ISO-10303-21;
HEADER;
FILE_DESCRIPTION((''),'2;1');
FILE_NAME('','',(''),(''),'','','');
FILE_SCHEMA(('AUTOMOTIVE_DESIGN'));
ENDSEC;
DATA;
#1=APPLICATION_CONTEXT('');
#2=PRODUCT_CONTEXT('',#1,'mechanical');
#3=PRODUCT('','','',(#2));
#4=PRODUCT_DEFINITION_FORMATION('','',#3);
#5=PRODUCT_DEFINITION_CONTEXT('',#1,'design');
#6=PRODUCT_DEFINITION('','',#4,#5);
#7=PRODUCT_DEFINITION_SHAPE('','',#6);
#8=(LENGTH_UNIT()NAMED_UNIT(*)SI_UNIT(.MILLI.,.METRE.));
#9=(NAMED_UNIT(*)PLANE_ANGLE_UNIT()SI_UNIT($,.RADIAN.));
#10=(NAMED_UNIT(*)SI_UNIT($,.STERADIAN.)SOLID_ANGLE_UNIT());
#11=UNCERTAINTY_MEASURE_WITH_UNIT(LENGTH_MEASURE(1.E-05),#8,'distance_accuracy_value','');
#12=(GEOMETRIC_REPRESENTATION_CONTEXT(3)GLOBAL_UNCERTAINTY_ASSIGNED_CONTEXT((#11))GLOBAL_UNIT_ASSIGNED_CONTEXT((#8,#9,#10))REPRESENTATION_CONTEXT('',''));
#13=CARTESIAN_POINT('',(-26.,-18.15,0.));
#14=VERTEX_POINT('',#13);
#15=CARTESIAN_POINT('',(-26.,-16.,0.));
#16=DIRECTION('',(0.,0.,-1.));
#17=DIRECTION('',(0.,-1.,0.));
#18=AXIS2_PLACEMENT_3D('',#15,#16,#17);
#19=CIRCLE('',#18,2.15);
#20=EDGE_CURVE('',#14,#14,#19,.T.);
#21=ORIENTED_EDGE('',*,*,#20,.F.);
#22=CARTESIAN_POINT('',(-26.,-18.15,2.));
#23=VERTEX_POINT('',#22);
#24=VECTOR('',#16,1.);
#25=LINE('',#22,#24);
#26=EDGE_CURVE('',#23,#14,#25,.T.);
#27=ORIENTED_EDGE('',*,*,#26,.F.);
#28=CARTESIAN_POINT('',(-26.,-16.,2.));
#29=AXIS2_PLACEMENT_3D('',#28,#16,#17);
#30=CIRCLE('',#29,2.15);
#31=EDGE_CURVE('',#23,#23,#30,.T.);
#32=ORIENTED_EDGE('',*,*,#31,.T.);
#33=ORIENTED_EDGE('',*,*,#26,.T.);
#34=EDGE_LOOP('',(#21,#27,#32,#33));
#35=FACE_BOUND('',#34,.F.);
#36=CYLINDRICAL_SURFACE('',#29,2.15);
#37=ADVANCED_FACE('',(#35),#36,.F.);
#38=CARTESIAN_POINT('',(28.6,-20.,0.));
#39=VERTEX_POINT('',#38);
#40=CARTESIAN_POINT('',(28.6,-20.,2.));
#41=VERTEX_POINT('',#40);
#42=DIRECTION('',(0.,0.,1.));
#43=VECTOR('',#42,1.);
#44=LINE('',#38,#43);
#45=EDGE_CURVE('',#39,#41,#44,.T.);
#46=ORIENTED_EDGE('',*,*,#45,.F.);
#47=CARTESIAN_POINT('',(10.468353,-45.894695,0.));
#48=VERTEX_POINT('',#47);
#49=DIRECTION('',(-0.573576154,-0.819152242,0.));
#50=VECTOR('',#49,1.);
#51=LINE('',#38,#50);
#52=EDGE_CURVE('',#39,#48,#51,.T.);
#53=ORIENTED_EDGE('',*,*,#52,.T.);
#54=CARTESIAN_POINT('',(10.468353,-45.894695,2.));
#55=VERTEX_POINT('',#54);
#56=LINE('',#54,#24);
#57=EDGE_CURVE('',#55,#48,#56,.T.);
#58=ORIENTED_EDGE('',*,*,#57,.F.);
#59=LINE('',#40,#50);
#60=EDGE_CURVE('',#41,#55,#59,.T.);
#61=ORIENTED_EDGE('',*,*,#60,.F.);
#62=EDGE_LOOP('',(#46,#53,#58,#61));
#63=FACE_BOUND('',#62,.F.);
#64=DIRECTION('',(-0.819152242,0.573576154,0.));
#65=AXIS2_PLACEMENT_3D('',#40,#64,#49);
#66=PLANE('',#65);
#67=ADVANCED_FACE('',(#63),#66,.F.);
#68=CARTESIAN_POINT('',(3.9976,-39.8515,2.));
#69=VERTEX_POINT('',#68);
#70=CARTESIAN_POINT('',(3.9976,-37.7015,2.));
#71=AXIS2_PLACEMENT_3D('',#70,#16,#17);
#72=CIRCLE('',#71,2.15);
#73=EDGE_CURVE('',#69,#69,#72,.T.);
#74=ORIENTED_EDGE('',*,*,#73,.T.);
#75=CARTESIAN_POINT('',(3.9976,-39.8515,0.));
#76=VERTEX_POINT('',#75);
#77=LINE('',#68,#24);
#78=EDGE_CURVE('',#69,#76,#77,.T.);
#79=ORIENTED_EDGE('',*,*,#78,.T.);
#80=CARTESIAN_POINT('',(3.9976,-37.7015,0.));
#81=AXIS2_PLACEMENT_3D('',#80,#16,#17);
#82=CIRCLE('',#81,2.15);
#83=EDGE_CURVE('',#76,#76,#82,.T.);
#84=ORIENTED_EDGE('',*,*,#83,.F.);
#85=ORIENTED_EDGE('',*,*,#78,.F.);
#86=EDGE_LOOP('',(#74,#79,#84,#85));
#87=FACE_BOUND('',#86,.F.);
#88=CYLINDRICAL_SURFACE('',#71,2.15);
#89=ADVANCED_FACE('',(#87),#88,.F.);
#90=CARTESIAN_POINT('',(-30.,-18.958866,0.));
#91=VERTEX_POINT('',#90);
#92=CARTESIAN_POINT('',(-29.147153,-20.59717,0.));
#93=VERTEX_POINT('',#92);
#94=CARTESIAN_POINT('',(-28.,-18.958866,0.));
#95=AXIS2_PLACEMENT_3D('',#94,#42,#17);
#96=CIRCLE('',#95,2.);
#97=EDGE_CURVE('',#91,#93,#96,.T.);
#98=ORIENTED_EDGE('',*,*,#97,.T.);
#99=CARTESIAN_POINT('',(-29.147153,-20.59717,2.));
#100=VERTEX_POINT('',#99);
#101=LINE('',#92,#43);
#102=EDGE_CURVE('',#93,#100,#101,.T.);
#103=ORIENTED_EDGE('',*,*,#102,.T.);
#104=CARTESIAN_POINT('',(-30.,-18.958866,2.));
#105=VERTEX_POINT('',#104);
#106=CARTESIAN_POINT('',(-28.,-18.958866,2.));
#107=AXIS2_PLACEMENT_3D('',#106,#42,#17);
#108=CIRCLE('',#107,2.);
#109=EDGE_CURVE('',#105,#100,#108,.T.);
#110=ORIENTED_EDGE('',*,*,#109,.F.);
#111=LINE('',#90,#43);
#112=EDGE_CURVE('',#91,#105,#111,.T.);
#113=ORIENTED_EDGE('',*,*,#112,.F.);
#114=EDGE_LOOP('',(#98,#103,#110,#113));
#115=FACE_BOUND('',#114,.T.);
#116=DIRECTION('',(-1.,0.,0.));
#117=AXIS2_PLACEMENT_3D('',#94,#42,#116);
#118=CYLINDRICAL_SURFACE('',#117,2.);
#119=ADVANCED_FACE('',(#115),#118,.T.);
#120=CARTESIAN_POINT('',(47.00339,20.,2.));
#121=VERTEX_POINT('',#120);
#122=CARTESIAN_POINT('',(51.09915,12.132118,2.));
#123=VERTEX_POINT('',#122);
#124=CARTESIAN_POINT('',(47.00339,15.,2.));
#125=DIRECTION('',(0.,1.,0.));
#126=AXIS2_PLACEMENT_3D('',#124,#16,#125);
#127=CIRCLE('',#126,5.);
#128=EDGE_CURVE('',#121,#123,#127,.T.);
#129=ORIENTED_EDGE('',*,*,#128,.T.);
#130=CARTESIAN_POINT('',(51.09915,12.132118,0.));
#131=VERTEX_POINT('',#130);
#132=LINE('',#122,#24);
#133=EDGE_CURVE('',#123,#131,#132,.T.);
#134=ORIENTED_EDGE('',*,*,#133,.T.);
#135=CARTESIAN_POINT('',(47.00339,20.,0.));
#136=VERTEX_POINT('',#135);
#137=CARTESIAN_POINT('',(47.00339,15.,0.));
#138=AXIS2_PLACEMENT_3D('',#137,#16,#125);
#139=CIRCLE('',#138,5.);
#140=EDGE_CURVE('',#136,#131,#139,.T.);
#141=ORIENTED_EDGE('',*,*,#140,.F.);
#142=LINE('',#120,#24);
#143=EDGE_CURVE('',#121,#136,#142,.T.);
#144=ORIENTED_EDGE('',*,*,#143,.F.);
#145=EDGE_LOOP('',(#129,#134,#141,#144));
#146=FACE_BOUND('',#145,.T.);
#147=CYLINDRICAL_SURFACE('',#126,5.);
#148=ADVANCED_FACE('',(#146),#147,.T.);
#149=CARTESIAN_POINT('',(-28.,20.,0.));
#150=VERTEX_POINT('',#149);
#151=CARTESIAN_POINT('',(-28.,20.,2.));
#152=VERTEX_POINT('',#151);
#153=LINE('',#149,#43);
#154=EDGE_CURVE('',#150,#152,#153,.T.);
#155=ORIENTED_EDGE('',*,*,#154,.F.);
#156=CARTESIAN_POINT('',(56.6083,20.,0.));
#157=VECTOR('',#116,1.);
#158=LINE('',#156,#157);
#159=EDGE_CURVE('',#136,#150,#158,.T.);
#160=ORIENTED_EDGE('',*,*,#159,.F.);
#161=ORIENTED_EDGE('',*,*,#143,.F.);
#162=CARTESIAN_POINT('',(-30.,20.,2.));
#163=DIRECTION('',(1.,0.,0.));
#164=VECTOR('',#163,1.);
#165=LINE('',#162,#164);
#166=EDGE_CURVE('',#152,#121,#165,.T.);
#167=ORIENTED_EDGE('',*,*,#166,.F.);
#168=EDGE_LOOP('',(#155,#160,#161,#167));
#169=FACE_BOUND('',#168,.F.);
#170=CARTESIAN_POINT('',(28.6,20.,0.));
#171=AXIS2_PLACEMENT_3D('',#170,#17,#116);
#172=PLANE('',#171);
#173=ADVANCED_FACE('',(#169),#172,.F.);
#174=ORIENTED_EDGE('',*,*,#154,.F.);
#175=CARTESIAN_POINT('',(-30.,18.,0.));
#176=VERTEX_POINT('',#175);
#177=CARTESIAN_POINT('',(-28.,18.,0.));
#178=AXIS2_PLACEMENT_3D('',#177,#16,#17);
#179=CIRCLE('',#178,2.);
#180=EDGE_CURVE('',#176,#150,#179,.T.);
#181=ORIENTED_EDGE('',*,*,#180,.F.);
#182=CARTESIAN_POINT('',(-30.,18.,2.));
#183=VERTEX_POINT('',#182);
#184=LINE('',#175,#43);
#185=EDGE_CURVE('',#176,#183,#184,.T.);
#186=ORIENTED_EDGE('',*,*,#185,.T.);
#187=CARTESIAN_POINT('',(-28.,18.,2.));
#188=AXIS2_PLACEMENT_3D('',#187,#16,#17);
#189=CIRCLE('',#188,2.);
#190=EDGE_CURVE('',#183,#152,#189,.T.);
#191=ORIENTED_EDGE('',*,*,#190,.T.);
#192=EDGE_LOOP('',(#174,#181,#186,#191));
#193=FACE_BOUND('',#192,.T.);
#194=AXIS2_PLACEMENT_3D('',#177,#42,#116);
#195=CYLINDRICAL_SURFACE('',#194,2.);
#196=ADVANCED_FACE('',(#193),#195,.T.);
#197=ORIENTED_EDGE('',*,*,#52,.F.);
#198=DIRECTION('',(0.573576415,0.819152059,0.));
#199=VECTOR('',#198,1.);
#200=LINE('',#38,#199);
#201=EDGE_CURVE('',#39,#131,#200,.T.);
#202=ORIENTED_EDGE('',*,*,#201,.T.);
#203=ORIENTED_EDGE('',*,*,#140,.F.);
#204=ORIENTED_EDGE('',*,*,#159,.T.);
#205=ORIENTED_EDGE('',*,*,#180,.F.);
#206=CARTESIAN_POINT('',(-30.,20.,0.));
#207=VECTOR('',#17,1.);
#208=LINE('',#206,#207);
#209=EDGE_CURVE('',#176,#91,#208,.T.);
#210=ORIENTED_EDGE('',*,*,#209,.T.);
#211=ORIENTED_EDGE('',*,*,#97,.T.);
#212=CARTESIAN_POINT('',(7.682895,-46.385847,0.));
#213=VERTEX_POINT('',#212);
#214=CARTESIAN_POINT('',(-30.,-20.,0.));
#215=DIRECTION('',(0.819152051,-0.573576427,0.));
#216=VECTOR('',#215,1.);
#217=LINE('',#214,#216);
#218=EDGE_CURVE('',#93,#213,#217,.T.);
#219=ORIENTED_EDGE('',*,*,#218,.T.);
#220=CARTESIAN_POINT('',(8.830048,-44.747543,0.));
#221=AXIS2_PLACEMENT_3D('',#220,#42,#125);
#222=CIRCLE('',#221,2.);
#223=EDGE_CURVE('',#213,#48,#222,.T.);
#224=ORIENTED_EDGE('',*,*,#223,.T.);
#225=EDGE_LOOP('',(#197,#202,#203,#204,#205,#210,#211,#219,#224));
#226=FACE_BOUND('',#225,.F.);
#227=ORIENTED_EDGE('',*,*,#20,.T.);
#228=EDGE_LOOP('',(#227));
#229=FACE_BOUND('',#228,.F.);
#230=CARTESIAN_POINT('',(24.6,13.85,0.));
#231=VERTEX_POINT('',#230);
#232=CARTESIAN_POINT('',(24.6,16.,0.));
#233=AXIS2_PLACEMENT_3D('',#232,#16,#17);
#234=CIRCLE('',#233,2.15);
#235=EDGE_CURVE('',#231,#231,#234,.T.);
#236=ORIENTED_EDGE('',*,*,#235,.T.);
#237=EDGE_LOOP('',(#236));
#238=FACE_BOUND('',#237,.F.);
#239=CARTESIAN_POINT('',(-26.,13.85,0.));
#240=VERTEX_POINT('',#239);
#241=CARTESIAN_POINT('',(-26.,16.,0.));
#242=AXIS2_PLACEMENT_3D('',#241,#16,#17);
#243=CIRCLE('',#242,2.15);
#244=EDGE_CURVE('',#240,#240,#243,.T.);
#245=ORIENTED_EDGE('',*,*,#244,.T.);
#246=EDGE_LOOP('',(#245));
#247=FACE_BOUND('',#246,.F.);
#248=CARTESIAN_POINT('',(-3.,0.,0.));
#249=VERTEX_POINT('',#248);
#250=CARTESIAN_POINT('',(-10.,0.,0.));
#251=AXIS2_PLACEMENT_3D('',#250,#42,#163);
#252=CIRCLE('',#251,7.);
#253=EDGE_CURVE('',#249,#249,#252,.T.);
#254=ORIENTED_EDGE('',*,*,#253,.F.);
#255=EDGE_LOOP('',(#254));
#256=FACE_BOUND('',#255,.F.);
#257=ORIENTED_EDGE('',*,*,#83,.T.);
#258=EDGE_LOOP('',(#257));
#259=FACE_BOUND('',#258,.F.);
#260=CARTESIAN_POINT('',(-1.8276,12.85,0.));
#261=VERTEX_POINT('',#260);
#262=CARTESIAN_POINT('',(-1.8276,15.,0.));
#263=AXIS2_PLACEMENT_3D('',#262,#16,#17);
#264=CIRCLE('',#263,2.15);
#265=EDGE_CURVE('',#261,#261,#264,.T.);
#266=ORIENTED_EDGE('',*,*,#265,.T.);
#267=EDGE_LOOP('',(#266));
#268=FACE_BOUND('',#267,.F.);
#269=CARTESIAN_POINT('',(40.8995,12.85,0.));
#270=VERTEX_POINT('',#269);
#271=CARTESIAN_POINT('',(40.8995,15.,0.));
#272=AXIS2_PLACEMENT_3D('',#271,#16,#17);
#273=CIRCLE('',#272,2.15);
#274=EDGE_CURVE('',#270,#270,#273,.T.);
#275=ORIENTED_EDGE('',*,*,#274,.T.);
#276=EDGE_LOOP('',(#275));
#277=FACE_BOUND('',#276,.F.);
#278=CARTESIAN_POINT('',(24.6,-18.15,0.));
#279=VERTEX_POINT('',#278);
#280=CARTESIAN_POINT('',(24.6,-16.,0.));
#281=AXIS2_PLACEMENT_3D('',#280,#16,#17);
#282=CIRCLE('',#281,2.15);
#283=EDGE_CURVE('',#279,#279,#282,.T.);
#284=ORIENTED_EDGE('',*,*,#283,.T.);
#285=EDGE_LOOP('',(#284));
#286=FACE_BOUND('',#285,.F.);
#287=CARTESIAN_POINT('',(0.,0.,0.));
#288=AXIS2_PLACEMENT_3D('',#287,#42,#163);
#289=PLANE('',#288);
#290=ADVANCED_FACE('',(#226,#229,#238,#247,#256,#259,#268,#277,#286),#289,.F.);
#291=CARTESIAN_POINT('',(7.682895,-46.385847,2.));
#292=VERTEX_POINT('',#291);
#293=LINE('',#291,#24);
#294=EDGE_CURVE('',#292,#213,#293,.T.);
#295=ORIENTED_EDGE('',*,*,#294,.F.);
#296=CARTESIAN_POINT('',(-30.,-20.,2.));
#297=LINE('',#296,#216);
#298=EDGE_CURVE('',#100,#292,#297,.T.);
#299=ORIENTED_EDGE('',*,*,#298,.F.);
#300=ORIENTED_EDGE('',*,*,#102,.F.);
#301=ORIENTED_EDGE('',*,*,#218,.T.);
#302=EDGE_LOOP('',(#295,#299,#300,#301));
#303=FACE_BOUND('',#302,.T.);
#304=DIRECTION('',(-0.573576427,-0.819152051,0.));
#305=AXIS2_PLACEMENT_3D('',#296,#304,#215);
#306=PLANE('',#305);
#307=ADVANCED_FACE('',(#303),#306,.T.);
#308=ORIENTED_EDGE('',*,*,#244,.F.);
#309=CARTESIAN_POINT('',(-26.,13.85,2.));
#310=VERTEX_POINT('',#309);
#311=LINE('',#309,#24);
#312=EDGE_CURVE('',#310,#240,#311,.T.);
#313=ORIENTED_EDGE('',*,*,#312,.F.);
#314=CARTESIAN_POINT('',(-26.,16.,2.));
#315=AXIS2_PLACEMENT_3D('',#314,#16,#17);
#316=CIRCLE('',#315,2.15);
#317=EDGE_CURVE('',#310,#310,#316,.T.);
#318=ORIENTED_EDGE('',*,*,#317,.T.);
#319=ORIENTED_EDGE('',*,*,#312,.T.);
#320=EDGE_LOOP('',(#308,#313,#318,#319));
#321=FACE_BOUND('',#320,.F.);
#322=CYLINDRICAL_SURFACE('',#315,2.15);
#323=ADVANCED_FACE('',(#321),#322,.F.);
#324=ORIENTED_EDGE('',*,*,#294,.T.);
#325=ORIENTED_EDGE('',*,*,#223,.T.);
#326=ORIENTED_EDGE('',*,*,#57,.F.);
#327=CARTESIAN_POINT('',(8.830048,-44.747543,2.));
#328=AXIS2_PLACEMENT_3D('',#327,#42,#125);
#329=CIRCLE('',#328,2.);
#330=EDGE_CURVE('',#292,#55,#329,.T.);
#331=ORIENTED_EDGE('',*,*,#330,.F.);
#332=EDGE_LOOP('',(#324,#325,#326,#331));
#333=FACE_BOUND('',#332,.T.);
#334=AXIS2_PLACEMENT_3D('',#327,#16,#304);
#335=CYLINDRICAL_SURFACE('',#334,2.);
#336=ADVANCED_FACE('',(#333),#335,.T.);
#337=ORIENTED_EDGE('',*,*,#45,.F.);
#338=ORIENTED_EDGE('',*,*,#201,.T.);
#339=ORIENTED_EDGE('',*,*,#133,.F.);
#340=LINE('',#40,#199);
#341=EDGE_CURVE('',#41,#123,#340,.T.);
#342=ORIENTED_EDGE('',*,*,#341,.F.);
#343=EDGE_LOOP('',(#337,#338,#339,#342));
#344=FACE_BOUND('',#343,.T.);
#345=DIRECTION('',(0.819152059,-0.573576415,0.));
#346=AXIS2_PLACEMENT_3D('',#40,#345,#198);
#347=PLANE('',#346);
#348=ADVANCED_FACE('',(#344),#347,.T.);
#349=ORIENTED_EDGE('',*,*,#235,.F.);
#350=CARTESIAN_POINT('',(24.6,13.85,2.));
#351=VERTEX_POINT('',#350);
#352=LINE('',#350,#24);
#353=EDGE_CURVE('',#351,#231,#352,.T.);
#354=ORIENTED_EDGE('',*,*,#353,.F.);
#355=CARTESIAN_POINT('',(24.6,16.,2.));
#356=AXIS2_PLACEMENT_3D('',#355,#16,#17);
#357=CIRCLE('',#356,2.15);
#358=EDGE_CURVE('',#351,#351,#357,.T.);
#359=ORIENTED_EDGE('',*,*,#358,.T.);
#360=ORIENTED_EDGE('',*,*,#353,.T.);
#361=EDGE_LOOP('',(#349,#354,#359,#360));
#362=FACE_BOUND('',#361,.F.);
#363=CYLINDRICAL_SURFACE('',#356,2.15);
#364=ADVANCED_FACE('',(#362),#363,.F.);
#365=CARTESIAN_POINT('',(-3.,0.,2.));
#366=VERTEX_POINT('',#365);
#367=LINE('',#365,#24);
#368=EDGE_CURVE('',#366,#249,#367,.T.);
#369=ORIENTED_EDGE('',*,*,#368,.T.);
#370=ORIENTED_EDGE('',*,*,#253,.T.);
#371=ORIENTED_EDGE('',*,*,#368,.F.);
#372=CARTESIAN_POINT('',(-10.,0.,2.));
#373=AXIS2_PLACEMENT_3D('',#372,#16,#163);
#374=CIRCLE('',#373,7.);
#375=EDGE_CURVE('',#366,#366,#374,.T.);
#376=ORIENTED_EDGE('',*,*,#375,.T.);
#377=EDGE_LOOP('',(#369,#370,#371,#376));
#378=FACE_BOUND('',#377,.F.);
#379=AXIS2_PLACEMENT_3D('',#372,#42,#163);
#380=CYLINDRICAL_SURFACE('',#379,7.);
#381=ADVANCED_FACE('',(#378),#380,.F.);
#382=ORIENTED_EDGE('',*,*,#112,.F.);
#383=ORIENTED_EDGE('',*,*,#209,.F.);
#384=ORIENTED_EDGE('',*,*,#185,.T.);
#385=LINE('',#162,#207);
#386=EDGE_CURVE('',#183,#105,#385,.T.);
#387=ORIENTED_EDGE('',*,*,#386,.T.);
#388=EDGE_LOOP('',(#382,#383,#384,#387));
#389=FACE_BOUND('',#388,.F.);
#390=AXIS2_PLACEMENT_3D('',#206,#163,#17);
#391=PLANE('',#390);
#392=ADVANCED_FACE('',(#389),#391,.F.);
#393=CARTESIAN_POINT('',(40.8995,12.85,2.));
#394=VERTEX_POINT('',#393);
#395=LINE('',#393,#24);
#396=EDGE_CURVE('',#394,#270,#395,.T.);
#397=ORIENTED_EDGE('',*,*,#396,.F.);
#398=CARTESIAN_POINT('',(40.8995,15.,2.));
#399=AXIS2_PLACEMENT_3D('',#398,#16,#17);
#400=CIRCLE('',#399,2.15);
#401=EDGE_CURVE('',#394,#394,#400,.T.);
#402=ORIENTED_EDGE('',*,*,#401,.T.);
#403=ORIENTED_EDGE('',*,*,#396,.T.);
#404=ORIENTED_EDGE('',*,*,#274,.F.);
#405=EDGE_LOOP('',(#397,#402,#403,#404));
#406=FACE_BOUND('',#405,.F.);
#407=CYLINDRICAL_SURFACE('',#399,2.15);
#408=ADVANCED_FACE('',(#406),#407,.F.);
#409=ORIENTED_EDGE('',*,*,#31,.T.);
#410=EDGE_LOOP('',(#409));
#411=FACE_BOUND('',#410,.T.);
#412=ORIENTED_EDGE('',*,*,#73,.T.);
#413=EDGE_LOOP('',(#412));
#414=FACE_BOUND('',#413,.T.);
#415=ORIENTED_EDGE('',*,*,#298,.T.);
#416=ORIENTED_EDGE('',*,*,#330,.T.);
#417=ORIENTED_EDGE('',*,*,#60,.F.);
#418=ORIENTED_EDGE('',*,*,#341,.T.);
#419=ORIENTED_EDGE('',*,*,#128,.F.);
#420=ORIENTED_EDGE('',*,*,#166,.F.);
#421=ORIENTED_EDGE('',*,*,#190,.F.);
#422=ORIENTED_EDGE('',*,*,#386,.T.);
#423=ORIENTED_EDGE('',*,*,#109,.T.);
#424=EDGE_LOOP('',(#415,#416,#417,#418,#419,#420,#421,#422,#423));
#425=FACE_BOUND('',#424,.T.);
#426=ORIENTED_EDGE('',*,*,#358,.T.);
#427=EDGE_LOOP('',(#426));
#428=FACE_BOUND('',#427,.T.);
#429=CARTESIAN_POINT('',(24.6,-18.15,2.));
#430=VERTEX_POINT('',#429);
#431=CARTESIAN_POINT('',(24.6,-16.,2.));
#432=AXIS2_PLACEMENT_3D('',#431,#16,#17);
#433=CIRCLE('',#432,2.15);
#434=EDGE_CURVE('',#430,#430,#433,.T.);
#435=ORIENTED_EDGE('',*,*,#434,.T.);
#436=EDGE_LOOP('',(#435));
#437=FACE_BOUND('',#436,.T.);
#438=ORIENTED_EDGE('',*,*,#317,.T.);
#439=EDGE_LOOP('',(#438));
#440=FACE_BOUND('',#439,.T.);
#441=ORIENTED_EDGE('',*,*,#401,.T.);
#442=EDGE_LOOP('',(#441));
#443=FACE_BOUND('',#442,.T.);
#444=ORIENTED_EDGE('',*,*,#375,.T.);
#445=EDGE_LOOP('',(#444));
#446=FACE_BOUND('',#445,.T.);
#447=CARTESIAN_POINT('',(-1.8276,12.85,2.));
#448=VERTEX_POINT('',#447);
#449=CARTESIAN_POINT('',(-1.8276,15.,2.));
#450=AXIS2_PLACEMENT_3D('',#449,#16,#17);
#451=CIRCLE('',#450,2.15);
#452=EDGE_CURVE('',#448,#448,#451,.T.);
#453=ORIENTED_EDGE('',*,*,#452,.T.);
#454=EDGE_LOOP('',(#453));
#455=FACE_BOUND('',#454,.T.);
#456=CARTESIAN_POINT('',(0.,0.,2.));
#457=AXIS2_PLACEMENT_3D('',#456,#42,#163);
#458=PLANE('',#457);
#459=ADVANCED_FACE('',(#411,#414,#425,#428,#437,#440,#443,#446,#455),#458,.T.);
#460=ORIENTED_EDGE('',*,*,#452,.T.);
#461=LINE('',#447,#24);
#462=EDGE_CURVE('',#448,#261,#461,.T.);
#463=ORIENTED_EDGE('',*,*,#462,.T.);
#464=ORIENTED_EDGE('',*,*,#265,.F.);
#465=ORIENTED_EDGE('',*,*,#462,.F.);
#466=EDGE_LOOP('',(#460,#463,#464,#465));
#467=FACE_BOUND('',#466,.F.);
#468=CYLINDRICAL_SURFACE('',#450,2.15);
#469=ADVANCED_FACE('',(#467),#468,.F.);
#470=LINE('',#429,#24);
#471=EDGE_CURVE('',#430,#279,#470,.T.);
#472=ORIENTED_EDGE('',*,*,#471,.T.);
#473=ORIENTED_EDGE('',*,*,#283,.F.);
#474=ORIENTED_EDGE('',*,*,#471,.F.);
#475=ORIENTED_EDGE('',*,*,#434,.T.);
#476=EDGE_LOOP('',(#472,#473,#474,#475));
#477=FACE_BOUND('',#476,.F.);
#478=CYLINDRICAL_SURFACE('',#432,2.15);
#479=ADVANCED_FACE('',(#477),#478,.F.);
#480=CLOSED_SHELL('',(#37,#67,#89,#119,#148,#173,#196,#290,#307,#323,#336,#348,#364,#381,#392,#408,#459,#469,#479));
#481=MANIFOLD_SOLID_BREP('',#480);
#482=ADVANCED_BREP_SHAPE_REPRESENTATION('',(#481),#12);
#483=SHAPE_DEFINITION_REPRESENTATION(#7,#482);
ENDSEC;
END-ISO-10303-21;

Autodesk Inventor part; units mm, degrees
ref_plane "YZ Plane" through (0, 0, 0) normal (1, 0, 0) x (0, 1, 0)
ref_plane "XZ Plane" through (0, 0, 0) normal (0, 1, 0) x (-1, 0, 0)
ref_plane "XY Plane" through (0, 0, 0) normal (0, 0, 1) x (1, 0, 0)
sketch "スケッチ1" plane through (0, 0, 0) normal (0, 0, 1) x (1, 0, 0)
  line L0 (-30, -20) -> (28.6, -20)
  line L1 (28.6, -20) -> (28.6, 20)
  line L2 (28.6, 20) -> (-30, 20)
  line L3 (-30, 20) -> (-30, -20)
  point P0 (0, 0)
  dimension "d1" = 40
  dimension "d28" = 30
  dimension "d29" = 28.6
  dimension "d32" = 20
extrude "プレート1" add sketch "スケッチ1" along normal blind 2
sketch "スケッチ2" plane through (0, 0, 2) normal (0, 0, 1) x (1, 0, 0)
  line L0 (-24, -5) -> (24.6, -5)
  line L1 (24.6, -5) -> (24.6, 5)
  line L2 (24.6, 5) -> (-24, 5)
  line L3 (-24, 5) -> (-24, -5)
  line L4 (-24, -5) -> (24.6, 5) construction
  line L5 (24.6, -5) -> (-24, 5) construction
  line L6 (28.6, -20) -> (-30, -20) projected
  line L7 (-30, -20) -> (-30, 20) projected
  line L8 (28.6, -20) -> (-30, -20) projected
  line L9 (28.6, 20) -> (28.6, -20) projected
  line L10 (-30, 20) -> (28.6, 20) projected
  circle A0 centre (-10, 0) radius 7
  point P0 (0.3, 0)
  point P1 (0.3, 0)
  point P2 (0.3, 0)
  point P3 (0, 0)
  dimension "GapSize" = 2
  dimension "d3" = 48.6
  dimension "d5" = 10
  dimension "d8" = 20
  dimension "d16" = 14
  dimension "d30" = 20
  dimension "d31" = 14
extrude "押し出し1" cut sketch "スケッチ2" against normal blind 10 contours A0 L2 L0 | L0 A0 | A0 L2
sketch "スケッチ3" plane through (0, 0, 2) normal (0, 0, 1) x (1, 0, 0)
  line L0 (-30, 20) -> (28.6, 20) projected
  line L1 (-30, -20) -> (-30, 20) projected
  line L2 (28.6, -20) -> (-30, -20) projected
  line L3 (28.6, 20) -> (28.6, -20) projected
  line L4 (24.6, 16) -> (-26, 16)
  line L5 (-26, 16) -> (-26, -16)
  line L6 (-26, -16) -> (24.6, -16)
  line L7 (24.6, -16) -> (24.6, 16)
  point P0 (0, 0)
  dimension "d19" = 4
hole "穴2" at (-26, 16, 2) at (-26, -16, 2) at (24.6, 16, 2) at (24.6, -16, 2) direction (0, 0, -1) diameter 4.3 end through all clearance for "Socket Head Cap Screw" size "M4" standard "Ansi Metric M Profile"
sketch "スケッチ4" plane through (0, 0, 2) normal (0, 0, 1) x (1, 0, 0)
  line L0 (-30, -20) -> (28.6, -20)
  line L1 (28.6, -20) -> (56.6083, 20)
  line L2 (28.6, 20) -> (28.6, -20)
  line L3 (28.6, 20) -> (56.6083, 20)
  line L4 (-30, -20) -> (9.3212, -47.533)
  line L5 (28.6, -20) -> (9.3212, -47.533)
  point P0 (0, 0)
  dimension "d33" = 35
  dimension "d34" = 35
sheet face with bend "面2" sketch "スケッチ4" thickness 2 toward (0, 0, -1) bend radius 2
bend "曲げ1"
sketch "スケッチ5" plane through (0, 0, 2) normal (0, 0, 1) x (1, 0, 0)
  line L0 (-30, -20) -> (9.3212, -47.533) projected
  line L1 (9.3212, -47.533) -> (56.6083, 20) projected
  line L2 (56.6083, 20) -> (-30, 20) projected
  point P0 (0, 0)
  point P1 (3.9976, -37.7015)
  point P2 (40.8995, 15)
  point P3 (-1.8276, 15)
  dimension "d40" = 5
  dimension "d41" = 10
  dimension "d42" = 10
  dimension "d43" = 5
  dimension "d44" = 5
  dimension "d45" = 45
hole "穴3" at (3.9976, -37.7015, 2) at (40.8995, 15, 2) at (-1.8276, 15, 2) direction (0, 0, -1) diameter 4.3 end through all
fillet "フィレット1" radius 2 3 edges at (-30, 20, 1) (-30, -20, 1) (9.3212, -47.533, 1)
fillet "フィレット2" radius 5 1 edges at (56.6083, 20, 1)
equation "\"GapSize\" = Thickness"
equation "\"d42\" = d41"
equation "\"d43\" = d40"
equation "\"d44\" = d40"
equation "\"d51\" = Thickness"
equation "\"d2\" = Thickness"
equation "\"d35\" = BendRadius"
equation "\"d36\" = BendReliefWidth"
equation "\"d38\" = MinimumRemnant"
equation "\"d37\" = BendReliefDepth"
equation "\"d39\" = TransitionRadius"
equation "\"BendRadius\" = Thickness"
equation "\"BendReliefWidth\" = Thickness"
equation "\"BendReliefDepth\" = 0.5 * Thickness"
equation "\"CornerReliefSize\" = 4 * Thickness"
equation "\"MinimumRemnant\" = 2 * Thickness"
equation "\"TransitionRadius\" = BendRadius"
equation "\"JacobiRadiusSize\" = BendRadius"
equation "\"Thickness\" = 2"
properties part number "s_carbon_plate4" material "CFRP"
